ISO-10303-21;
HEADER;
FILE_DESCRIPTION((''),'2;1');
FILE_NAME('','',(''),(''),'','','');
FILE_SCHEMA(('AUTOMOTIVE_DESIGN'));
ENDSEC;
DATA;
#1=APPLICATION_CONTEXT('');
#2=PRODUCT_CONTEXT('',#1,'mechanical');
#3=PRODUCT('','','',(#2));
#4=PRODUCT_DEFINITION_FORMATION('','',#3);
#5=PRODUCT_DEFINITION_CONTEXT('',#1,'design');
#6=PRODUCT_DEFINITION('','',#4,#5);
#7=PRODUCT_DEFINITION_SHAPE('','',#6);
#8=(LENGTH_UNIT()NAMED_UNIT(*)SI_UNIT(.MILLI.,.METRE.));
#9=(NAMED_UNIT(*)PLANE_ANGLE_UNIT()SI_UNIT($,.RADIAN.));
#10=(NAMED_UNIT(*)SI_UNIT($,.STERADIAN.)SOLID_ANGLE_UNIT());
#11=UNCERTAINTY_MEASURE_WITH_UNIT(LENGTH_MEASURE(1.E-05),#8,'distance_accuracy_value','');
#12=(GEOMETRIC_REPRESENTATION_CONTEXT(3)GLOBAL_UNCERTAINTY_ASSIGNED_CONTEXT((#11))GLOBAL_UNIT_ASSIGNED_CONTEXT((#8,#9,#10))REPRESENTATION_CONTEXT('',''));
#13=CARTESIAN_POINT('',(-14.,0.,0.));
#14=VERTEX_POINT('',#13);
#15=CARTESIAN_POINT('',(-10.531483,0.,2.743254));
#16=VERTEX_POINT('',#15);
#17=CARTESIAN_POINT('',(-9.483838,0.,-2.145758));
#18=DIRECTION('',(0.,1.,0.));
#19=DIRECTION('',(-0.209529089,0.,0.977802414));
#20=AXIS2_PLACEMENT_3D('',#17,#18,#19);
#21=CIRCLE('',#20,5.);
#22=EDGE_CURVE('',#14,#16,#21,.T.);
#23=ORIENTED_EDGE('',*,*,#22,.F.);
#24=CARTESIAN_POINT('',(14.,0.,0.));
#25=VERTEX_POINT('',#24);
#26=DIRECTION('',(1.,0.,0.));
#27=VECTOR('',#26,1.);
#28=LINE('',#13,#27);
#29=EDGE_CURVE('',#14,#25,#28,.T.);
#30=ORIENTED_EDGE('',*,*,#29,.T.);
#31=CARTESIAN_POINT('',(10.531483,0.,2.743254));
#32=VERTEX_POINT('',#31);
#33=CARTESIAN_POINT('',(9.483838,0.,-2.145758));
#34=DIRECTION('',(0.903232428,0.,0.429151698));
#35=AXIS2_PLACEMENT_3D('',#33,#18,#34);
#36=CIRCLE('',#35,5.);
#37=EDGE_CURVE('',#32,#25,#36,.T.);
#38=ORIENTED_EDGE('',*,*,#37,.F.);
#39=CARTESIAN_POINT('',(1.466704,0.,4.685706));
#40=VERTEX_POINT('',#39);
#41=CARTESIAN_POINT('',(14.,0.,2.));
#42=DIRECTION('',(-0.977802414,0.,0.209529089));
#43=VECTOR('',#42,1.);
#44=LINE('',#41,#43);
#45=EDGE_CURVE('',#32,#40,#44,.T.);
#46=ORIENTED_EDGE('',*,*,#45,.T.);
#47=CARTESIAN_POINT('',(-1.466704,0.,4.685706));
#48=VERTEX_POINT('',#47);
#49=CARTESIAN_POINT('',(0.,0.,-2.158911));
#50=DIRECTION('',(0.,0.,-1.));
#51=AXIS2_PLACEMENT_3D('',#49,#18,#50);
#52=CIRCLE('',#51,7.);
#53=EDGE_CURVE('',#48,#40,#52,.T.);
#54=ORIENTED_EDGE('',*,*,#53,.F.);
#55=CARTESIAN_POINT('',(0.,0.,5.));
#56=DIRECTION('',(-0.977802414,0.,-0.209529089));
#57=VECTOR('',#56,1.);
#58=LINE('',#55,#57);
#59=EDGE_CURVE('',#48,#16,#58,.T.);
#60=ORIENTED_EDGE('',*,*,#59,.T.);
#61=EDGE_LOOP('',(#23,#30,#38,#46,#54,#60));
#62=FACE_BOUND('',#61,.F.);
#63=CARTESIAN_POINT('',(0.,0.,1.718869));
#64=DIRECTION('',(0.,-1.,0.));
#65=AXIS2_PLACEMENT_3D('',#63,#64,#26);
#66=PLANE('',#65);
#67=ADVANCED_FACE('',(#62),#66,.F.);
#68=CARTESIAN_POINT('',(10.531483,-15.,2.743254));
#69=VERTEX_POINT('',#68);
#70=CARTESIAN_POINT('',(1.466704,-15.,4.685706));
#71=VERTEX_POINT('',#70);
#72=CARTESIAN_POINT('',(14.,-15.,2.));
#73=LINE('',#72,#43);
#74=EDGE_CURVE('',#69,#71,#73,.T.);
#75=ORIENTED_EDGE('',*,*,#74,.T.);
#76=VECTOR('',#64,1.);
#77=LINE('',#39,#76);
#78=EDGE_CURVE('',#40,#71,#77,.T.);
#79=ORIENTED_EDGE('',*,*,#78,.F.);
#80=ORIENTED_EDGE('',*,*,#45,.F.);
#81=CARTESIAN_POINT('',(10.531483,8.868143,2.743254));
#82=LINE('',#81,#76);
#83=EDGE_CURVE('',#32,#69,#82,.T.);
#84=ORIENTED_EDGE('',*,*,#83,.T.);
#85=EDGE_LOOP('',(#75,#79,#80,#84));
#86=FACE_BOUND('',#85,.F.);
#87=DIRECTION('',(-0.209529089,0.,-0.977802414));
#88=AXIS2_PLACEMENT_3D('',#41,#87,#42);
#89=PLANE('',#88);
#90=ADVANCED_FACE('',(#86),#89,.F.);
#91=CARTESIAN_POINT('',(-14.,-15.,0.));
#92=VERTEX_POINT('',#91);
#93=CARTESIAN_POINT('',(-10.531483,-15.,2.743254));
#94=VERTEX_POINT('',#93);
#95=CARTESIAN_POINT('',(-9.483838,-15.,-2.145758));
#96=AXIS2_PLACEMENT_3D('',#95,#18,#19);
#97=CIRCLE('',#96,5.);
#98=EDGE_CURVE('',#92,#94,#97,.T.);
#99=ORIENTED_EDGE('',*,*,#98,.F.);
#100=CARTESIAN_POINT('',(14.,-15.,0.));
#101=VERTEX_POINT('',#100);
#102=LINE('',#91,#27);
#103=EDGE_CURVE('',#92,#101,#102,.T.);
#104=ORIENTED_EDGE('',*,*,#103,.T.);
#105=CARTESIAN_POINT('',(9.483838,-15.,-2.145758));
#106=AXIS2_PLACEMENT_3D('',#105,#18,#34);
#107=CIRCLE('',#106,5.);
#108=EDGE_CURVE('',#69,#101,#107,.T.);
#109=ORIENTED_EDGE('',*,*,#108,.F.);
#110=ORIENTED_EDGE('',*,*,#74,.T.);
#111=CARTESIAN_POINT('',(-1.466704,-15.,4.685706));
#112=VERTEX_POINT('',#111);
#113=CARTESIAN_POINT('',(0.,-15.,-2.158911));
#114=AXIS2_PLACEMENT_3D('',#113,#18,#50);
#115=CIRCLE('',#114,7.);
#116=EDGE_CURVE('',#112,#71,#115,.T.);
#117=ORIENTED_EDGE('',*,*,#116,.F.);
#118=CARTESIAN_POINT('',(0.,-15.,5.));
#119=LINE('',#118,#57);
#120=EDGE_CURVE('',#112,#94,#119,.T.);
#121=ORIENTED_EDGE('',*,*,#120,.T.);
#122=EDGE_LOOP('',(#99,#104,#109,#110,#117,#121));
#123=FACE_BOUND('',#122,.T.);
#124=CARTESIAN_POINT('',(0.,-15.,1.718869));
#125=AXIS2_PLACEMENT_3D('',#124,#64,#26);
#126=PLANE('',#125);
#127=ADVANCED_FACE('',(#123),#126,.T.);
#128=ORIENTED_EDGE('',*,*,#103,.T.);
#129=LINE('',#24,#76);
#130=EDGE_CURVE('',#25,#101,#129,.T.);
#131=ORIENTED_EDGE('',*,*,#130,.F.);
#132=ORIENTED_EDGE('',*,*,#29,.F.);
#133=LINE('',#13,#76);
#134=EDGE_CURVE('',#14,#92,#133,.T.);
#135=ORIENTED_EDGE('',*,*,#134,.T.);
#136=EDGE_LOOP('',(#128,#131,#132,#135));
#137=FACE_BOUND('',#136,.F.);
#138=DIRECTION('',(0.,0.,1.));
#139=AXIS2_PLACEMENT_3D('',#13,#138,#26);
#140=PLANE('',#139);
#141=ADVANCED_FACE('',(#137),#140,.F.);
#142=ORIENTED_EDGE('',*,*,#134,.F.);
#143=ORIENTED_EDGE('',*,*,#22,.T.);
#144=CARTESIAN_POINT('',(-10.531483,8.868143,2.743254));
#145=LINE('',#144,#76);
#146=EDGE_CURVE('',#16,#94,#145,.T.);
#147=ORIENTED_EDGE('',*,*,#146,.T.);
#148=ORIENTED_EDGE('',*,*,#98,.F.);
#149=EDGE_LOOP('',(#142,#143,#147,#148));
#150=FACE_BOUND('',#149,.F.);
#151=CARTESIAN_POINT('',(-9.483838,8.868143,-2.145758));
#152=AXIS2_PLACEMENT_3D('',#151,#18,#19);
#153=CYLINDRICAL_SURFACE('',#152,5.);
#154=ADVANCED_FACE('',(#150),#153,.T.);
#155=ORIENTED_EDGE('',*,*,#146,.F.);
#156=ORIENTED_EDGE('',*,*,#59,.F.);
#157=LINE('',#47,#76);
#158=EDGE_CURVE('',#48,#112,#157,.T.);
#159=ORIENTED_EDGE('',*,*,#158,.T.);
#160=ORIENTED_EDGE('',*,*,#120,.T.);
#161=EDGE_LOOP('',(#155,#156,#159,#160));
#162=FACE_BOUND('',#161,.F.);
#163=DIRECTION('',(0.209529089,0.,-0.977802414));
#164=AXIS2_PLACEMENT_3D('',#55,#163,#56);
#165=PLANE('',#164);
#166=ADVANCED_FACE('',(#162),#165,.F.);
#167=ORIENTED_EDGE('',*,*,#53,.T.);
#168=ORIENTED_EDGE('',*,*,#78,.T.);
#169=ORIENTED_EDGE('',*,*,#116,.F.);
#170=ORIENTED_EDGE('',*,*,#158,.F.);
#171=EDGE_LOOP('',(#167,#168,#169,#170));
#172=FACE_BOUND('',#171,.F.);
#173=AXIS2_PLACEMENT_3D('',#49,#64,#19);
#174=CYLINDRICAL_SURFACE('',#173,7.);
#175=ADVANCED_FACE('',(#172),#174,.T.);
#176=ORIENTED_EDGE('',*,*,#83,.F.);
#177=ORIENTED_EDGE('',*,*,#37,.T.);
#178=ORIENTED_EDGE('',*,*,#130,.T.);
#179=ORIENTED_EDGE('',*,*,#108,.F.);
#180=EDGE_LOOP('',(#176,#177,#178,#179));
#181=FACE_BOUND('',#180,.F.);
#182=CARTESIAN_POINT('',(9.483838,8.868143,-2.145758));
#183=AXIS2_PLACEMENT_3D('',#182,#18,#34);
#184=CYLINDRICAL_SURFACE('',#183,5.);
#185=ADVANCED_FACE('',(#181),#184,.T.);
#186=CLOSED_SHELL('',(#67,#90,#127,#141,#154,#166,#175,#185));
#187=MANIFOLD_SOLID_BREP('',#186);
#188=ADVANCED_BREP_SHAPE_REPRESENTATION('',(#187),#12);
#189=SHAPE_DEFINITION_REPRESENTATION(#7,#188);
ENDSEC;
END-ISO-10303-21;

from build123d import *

# Parameters (mm, degrees)
F1_DEPTH    = 15
F2_T1_DEPTH = 32.7362862295
F3_R        = 7


# Not quite as in the source:
# - a fillet or chamfer that OpenCascade refuses, or shapes differently, is made with other operations: its cross-section is extruded or revolved along the edge and cut away or added


with BuildPart() as f1:
    # F0 (on Front) → F1 (new body)
    with BuildSketch(Plane.XZ):
        Polygon((-14, 0), (14, 0), (14, 2), (0, 5), (-14, 2), align=None)
    extrude(amount=F1_DEPTH)

    # F2: fillet of radius 5 on 2 edges, made by hand

    # F2_s2 → F2_t1 (cut)
    with BuildSketch(Plane.XZ.offset(-8.8681431148)):
        with BuildLine():
            ThreePointArc((-10.5314833016, 2.7432535782), (-12.5855065639, 1.7759313526), (-14, 0))
            Line((-14, 0), (-14, 2))
            Line((-14, 2), (-10.5314833016, 2.7432535782))
        make_face()
        with BuildLine():
            ThreePointArc((14, 0), (12.5855065639, 1.7759313526), (10.5314833016, 2.7432535782))
            Line((10.5314833016, 2.7432535782), (14, 2))
            Line((14, 2), (14, 0))
        make_face()
    extrude(amount=F2_T1_DEPTH, mode=Mode.SUBTRACT)

    # F3
    f3_edges = [f1.edges().sort_by_distance(p)[0] for p in [
        (0, -7.5, 5),
    ]]
    fillet(f3_edges, radius=F3_R)


solid = f1.part
